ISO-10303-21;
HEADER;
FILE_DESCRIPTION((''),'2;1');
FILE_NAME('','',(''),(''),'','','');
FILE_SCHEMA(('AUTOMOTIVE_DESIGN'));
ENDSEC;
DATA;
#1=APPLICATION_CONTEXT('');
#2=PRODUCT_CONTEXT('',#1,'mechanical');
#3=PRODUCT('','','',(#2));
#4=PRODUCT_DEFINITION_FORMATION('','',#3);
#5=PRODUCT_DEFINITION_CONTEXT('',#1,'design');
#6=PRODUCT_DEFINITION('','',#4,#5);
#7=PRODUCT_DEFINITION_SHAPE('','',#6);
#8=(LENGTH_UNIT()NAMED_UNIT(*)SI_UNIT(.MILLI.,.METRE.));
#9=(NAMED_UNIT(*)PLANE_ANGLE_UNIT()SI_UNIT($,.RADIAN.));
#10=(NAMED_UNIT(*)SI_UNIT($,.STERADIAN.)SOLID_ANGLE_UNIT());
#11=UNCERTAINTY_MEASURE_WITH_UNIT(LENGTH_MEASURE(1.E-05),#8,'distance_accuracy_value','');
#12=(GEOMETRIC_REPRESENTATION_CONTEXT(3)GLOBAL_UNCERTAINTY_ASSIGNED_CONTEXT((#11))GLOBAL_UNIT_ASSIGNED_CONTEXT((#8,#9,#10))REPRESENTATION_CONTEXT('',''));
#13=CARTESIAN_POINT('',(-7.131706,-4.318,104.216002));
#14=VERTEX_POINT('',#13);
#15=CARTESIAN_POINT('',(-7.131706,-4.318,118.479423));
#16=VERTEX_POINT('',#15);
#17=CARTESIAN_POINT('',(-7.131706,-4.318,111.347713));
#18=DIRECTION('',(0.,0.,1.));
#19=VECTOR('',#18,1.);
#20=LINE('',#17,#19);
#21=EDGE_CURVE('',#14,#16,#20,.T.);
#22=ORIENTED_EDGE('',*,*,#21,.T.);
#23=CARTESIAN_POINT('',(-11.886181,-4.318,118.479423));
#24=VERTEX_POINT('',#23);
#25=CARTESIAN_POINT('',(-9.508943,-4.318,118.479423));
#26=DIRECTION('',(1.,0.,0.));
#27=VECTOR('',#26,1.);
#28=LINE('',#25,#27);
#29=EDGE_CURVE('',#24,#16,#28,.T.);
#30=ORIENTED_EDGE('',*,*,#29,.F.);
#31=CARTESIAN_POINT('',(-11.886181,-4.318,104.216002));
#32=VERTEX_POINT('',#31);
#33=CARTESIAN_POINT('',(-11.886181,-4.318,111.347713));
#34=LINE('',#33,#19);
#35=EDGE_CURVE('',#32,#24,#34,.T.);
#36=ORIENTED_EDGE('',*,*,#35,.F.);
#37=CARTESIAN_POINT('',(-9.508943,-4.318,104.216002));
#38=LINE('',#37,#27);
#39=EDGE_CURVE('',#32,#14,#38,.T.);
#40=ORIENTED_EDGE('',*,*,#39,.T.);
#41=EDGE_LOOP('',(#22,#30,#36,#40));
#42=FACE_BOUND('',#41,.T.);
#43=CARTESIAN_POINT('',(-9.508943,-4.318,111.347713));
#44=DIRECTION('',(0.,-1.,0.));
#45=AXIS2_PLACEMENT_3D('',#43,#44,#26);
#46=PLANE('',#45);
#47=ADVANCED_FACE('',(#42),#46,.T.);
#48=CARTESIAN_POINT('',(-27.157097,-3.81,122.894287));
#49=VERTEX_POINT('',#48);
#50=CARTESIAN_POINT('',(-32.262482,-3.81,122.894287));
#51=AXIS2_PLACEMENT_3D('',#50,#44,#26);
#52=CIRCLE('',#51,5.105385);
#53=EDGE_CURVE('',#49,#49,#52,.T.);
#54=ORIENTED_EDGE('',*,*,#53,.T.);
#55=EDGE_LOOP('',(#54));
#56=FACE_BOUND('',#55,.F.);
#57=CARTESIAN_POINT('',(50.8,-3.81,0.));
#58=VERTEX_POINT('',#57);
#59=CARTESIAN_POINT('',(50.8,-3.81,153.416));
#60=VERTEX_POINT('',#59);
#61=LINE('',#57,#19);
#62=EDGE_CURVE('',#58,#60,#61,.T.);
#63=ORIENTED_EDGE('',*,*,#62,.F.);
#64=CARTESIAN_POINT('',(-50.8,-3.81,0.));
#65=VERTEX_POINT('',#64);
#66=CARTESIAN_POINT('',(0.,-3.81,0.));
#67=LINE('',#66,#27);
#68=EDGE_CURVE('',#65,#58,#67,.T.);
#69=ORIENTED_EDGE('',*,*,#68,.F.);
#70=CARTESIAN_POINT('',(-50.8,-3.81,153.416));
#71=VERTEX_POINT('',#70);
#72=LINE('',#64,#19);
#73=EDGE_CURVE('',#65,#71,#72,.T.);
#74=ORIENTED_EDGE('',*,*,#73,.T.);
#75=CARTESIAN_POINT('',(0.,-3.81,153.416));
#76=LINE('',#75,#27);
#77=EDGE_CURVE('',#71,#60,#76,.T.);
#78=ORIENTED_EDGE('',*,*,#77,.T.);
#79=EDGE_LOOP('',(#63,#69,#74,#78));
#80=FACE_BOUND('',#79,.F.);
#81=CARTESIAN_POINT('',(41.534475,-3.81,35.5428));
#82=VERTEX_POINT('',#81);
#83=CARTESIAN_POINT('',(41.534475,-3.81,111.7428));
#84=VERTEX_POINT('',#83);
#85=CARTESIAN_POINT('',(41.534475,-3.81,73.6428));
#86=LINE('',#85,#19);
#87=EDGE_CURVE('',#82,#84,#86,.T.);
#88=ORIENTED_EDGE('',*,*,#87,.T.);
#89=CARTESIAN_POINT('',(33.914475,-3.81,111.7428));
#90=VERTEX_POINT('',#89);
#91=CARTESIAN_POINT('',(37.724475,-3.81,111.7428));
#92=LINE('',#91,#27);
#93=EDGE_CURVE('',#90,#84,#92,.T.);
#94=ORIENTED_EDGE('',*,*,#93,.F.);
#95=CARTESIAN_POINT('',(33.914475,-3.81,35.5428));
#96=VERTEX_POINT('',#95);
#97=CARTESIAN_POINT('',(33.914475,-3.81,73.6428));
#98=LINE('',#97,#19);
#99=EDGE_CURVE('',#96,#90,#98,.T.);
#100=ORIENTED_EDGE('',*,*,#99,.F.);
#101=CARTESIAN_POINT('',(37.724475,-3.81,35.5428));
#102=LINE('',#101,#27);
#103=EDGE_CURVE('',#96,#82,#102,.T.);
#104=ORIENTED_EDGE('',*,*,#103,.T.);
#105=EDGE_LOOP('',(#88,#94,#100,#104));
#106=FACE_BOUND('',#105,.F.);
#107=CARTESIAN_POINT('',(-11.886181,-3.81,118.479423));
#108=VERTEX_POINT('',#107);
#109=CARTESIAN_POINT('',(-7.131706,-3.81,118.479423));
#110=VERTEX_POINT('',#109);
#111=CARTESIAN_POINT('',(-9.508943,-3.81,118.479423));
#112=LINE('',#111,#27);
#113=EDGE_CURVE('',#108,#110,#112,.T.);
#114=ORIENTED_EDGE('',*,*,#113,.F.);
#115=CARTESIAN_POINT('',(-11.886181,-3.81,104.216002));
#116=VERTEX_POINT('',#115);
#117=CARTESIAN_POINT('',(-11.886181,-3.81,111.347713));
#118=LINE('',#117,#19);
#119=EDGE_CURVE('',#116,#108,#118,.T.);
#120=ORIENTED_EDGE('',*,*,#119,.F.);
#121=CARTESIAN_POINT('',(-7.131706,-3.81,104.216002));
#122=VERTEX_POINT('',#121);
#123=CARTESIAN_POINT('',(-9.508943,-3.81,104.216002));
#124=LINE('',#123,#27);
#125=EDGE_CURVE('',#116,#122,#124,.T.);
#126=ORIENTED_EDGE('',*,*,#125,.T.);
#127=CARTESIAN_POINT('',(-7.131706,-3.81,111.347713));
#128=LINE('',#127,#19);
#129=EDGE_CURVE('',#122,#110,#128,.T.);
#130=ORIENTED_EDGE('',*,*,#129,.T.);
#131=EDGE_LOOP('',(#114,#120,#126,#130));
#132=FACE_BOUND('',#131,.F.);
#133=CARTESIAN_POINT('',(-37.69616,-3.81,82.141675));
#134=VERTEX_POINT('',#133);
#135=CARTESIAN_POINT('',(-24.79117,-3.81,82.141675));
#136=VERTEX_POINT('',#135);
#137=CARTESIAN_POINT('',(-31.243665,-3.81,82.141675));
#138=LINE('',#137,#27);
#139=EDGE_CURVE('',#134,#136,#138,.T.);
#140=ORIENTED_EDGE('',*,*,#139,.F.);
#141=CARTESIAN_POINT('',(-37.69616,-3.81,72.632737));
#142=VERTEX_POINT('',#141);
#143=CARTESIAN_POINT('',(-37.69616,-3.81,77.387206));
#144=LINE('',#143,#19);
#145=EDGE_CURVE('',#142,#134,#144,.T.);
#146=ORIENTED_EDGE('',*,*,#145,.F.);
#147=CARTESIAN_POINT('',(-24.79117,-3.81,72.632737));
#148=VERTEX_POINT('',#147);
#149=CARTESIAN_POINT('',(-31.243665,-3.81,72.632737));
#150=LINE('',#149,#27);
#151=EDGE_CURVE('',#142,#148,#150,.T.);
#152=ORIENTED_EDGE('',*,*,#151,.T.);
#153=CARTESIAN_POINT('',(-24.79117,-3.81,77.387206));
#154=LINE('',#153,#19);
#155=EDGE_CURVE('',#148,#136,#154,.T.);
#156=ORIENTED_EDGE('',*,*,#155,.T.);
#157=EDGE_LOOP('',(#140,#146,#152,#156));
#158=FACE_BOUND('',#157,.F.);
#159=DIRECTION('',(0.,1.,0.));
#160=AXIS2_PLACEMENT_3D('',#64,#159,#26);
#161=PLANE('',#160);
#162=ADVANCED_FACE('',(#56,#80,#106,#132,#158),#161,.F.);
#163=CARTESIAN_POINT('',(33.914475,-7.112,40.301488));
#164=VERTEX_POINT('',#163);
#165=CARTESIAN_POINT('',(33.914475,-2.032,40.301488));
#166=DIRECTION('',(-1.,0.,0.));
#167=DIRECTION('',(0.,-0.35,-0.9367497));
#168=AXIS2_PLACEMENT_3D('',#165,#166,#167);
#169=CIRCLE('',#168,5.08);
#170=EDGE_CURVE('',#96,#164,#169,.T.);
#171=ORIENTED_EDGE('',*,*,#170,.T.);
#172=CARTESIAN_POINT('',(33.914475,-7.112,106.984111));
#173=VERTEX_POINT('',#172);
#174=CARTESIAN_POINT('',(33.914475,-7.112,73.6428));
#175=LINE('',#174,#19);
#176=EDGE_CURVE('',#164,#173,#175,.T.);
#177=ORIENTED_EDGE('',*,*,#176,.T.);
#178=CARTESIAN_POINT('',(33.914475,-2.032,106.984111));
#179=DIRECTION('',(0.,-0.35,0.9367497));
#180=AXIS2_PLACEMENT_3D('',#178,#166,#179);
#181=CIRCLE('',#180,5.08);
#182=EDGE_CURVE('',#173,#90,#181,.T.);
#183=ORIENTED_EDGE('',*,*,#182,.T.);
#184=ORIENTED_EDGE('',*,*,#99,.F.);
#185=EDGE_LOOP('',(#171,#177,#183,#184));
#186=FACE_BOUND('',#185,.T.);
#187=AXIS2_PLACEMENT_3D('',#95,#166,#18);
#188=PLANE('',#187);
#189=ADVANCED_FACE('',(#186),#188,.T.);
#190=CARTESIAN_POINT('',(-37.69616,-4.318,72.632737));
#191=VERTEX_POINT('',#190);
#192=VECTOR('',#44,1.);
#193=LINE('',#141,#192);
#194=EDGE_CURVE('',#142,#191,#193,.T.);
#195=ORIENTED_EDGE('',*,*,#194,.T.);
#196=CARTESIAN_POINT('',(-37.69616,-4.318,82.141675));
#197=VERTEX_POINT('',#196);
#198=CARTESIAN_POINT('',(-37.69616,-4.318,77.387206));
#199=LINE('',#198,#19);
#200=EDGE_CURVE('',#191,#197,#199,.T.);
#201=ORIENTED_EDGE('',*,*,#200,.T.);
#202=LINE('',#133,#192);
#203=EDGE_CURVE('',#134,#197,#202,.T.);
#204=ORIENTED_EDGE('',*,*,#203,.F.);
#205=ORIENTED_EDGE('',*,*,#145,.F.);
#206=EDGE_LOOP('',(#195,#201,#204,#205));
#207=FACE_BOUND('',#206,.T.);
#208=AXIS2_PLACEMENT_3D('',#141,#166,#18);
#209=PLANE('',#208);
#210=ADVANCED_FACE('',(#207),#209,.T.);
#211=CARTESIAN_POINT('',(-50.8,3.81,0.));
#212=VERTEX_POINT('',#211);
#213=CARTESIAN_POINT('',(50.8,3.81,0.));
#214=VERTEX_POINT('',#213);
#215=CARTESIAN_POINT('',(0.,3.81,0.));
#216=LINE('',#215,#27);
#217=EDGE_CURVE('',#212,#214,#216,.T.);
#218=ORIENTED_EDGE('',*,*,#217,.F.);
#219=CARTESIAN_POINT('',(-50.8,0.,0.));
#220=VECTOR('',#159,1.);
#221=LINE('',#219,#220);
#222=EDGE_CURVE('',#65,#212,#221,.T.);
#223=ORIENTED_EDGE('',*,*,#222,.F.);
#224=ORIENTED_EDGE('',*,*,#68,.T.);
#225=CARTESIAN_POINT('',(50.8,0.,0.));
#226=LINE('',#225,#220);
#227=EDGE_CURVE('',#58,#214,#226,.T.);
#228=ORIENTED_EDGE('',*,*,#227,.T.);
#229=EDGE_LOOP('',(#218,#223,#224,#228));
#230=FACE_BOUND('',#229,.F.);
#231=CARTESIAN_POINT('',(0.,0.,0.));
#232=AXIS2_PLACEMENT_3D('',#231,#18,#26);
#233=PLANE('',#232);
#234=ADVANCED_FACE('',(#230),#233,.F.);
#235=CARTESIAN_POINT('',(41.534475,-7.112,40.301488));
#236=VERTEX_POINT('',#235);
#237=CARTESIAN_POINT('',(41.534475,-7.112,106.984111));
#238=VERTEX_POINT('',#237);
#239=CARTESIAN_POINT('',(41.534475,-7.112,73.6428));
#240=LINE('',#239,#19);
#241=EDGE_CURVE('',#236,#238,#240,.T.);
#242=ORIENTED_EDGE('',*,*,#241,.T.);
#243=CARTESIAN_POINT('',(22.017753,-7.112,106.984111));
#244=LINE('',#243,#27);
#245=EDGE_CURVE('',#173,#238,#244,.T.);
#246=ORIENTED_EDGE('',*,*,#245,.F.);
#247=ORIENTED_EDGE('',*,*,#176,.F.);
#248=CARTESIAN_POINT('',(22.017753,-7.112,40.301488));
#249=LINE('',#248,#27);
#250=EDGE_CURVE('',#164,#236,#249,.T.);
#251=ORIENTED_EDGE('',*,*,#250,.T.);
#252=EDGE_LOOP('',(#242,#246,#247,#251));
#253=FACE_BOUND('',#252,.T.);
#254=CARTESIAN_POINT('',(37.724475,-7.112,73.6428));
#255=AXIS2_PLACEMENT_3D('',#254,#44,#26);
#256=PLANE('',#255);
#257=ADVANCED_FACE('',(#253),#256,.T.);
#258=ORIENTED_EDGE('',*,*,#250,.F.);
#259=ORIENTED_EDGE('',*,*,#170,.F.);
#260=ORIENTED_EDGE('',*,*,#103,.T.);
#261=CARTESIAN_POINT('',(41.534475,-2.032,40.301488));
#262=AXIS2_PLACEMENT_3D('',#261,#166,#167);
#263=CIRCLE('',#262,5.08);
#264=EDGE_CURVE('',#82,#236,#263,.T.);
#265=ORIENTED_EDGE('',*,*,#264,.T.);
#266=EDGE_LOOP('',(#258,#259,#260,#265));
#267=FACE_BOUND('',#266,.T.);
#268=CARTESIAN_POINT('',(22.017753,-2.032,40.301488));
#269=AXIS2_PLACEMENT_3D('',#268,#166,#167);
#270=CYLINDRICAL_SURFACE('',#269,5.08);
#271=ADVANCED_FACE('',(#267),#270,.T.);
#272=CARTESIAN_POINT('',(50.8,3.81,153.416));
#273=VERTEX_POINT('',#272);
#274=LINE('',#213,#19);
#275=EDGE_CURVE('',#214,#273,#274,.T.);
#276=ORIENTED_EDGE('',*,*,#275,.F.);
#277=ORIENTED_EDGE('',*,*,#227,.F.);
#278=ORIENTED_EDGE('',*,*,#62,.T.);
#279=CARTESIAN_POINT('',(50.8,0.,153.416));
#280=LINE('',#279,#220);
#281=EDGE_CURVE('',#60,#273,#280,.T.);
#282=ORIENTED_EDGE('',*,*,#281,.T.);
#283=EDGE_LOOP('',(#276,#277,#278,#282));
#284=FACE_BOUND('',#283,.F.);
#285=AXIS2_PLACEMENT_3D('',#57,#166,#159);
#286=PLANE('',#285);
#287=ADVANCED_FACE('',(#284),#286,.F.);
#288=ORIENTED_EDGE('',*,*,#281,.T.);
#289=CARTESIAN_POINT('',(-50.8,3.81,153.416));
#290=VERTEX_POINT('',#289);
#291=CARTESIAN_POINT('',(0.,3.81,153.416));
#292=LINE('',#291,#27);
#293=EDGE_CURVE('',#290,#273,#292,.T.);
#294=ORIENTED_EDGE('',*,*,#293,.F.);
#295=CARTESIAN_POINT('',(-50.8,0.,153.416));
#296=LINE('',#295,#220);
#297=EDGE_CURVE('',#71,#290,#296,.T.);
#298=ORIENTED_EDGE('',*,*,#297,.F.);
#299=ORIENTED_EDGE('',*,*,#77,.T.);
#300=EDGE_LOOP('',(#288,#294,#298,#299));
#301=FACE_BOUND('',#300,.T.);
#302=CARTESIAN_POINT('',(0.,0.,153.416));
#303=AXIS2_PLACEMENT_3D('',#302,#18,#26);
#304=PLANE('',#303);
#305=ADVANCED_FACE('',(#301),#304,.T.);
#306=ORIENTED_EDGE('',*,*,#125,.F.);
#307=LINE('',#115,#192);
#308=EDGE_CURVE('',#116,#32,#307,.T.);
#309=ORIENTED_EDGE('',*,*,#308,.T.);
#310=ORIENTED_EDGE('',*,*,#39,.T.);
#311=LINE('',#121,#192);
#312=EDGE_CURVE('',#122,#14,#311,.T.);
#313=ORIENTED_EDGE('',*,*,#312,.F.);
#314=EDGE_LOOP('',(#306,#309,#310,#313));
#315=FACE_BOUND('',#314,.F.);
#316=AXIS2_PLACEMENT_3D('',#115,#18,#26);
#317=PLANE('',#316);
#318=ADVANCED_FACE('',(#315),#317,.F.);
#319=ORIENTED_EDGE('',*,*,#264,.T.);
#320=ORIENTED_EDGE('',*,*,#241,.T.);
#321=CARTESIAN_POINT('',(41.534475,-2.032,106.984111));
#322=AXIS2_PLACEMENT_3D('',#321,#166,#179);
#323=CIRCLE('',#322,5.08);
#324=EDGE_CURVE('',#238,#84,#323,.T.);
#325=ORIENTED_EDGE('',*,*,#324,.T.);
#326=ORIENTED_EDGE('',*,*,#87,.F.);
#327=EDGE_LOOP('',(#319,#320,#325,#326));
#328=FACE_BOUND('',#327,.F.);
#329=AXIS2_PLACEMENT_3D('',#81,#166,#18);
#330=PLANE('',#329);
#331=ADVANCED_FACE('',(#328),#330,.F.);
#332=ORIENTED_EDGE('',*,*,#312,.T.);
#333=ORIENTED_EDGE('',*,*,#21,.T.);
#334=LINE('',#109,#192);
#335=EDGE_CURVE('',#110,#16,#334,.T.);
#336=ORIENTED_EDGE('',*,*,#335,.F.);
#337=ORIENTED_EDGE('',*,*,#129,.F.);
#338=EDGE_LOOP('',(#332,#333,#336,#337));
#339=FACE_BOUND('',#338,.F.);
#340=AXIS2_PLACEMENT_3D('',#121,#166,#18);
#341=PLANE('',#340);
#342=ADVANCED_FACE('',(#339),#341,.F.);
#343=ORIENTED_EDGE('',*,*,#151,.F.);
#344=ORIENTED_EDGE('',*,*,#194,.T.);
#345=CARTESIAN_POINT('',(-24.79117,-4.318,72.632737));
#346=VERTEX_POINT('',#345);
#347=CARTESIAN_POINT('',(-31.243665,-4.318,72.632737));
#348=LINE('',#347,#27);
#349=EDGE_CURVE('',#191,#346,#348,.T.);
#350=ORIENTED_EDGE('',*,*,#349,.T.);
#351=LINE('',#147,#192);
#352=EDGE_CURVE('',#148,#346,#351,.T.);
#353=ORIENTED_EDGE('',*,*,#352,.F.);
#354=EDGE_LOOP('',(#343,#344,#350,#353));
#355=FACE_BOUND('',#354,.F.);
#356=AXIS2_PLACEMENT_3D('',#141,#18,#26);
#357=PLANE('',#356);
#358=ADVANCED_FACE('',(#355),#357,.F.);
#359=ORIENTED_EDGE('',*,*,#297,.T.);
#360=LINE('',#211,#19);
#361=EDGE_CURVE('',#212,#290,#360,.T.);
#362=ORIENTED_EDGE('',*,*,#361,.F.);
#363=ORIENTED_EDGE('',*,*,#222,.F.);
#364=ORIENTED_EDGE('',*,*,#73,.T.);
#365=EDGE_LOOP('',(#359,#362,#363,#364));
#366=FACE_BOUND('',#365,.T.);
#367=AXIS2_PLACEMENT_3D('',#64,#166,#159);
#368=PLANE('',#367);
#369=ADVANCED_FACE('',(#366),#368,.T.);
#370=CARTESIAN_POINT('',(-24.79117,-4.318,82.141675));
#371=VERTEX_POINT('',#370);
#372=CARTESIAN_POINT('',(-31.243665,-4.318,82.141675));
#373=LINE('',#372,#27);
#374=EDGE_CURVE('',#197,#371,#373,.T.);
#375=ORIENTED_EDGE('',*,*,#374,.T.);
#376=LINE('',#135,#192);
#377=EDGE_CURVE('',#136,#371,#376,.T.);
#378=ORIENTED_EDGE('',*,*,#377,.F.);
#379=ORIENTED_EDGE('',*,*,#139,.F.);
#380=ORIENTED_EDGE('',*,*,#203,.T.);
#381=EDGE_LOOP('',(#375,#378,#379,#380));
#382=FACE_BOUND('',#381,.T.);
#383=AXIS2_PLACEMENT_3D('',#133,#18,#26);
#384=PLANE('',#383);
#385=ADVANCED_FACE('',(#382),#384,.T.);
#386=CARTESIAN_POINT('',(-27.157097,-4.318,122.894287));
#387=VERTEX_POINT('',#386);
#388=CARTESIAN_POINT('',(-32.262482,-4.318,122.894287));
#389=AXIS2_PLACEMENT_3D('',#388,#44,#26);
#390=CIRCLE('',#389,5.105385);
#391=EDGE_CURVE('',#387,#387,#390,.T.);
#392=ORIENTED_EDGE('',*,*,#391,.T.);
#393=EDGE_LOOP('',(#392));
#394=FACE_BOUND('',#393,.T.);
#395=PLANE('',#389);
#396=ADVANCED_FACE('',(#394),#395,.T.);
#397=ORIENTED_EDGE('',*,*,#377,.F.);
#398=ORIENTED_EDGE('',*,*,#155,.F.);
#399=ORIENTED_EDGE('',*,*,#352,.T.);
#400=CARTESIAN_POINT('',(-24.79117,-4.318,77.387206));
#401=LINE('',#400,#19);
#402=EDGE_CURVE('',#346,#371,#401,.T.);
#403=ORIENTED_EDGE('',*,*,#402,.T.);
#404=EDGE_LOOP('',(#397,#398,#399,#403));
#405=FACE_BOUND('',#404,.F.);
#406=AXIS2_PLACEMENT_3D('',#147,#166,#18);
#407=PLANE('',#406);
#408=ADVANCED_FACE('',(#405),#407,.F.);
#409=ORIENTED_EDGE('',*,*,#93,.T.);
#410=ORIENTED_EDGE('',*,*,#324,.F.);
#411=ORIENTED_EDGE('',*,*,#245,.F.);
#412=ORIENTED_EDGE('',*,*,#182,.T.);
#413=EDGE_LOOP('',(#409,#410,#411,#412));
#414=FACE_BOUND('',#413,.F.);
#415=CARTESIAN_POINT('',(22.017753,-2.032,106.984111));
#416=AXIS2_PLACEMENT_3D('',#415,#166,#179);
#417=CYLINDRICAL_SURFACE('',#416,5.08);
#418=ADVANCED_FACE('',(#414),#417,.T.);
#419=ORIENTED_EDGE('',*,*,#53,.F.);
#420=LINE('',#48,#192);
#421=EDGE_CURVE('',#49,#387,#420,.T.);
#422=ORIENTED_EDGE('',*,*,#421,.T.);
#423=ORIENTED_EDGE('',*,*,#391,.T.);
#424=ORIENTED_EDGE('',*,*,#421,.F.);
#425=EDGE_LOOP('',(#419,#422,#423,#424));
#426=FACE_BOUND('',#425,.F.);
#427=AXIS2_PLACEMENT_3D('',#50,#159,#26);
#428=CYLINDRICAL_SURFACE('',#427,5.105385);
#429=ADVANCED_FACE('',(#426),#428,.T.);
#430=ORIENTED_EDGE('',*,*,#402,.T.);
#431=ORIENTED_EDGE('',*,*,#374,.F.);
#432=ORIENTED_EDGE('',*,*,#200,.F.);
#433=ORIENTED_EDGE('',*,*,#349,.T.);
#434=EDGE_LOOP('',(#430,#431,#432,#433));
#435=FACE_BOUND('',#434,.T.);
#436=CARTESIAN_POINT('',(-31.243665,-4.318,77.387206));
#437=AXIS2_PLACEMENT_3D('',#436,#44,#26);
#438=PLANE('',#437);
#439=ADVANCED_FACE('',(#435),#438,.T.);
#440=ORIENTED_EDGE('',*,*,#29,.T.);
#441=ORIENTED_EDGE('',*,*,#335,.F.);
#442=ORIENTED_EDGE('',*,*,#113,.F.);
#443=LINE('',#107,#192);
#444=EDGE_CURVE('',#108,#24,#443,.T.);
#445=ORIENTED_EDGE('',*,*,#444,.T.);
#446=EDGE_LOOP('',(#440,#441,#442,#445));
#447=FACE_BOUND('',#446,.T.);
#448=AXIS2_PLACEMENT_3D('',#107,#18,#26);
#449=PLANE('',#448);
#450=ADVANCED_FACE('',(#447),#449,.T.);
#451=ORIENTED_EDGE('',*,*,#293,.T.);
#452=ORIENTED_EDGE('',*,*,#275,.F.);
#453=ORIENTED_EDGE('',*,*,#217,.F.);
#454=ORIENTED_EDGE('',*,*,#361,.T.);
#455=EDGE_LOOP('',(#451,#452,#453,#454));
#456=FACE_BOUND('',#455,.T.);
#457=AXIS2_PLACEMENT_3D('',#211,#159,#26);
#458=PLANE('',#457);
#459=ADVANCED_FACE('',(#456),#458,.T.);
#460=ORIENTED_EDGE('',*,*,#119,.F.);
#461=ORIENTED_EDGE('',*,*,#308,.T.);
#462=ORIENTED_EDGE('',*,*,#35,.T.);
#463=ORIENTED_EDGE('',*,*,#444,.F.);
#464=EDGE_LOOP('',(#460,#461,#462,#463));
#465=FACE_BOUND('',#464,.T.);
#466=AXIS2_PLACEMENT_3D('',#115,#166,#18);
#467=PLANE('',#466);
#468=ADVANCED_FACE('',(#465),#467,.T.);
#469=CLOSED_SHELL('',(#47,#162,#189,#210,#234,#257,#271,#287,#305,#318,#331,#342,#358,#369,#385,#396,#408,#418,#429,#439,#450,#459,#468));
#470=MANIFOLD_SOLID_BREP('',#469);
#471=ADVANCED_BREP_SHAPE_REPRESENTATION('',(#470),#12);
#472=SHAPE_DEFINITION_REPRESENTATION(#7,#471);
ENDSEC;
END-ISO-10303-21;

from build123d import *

# Parameters (mm, degrees)
F0_W        = 101.6
F0_H        = 7.62
F1_DEPTH    = 153.416
F2_W        = 7.62
F2_H        = 76.2
F3_DEPTH    = 3.302
F4_T1_DEPTH = 31.4134423739
F5_R        = 5.1053850436
F5_W        = 4.7544753179
F5_H        = 14.2634212971
F5_W_2      = 12.9049904644
F5_H_2      = 9.5089375973
F6_DEPTH    = 0.508


# Not quite as in the source:
# - a fillet or chamfer that OpenCascade refuses, or shapes differently, is made with other operations: its cross-section is extruded or revolved along the edge and cut away or added


with BuildPart() as f1:
    # F0 (on Top) → F1 (new body)
    with BuildSketch(Plane.XY):
        Rectangle(F0_W, F0_H)
    extrude(amount=F1_DEPTH)

    # F2 (on face) → F3 (join)
    with BuildSketch(Plane.XZ.offset(3.81)):
        with Locations((37.7244745995, 73.6427996308)):
            Rectangle(F2_W, F2_H)
    extrude(amount=F3_DEPTH)

    # F4: fillet of radius 5.08 on 2 edges, made by hand

    # F4_s2 → F4_t1 (cut)
    with BuildSketch(Plane.YZ.offset(22.0177534125)):
        with BuildLine():
            ThreePointArc((-3.81, 111.7427996308), (-6.2056458882, 109.8801567357), (-7.112, 106.984111156))
            Line((-7.112, 106.984111156), (-7.112, 111.7427996308))
            Line((-7.112, 111.7427996308), (-3.81, 111.7427996308))
        make_face()
        with BuildLine():
            ThreePointArc((-3.81, 35.5427996308), (-6.2056458882, 37.4054425258), (-7.112, 40.3014881055))
            Line((-7.112, 40.3014881055), (-7.112, 35.5427996308))
            Line((-7.112, 35.5427996308), (-3.81, 35.5427996308))
        make_face()
    extrude(amount=F4_T1_DEPTH, mode=Mode.SUBTRACT)

    # F5 (on face) → F6 (join)
    with BuildSketch(Plane.XZ.offset(3.81)):
        with Locations((-32.2624817491, 122.8942871094)):
            Circle(F5_R)
        with Locations((-9.5089431852, 111.3477125764)):
            Rectangle(F5_W, F5_H)
        with Locations((-31.2436651438, 77.3872062564)):
            Rectangle(F5_W_2, F5_H_2)
    extrude(amount=F6_DEPTH)


solid = f1.part
